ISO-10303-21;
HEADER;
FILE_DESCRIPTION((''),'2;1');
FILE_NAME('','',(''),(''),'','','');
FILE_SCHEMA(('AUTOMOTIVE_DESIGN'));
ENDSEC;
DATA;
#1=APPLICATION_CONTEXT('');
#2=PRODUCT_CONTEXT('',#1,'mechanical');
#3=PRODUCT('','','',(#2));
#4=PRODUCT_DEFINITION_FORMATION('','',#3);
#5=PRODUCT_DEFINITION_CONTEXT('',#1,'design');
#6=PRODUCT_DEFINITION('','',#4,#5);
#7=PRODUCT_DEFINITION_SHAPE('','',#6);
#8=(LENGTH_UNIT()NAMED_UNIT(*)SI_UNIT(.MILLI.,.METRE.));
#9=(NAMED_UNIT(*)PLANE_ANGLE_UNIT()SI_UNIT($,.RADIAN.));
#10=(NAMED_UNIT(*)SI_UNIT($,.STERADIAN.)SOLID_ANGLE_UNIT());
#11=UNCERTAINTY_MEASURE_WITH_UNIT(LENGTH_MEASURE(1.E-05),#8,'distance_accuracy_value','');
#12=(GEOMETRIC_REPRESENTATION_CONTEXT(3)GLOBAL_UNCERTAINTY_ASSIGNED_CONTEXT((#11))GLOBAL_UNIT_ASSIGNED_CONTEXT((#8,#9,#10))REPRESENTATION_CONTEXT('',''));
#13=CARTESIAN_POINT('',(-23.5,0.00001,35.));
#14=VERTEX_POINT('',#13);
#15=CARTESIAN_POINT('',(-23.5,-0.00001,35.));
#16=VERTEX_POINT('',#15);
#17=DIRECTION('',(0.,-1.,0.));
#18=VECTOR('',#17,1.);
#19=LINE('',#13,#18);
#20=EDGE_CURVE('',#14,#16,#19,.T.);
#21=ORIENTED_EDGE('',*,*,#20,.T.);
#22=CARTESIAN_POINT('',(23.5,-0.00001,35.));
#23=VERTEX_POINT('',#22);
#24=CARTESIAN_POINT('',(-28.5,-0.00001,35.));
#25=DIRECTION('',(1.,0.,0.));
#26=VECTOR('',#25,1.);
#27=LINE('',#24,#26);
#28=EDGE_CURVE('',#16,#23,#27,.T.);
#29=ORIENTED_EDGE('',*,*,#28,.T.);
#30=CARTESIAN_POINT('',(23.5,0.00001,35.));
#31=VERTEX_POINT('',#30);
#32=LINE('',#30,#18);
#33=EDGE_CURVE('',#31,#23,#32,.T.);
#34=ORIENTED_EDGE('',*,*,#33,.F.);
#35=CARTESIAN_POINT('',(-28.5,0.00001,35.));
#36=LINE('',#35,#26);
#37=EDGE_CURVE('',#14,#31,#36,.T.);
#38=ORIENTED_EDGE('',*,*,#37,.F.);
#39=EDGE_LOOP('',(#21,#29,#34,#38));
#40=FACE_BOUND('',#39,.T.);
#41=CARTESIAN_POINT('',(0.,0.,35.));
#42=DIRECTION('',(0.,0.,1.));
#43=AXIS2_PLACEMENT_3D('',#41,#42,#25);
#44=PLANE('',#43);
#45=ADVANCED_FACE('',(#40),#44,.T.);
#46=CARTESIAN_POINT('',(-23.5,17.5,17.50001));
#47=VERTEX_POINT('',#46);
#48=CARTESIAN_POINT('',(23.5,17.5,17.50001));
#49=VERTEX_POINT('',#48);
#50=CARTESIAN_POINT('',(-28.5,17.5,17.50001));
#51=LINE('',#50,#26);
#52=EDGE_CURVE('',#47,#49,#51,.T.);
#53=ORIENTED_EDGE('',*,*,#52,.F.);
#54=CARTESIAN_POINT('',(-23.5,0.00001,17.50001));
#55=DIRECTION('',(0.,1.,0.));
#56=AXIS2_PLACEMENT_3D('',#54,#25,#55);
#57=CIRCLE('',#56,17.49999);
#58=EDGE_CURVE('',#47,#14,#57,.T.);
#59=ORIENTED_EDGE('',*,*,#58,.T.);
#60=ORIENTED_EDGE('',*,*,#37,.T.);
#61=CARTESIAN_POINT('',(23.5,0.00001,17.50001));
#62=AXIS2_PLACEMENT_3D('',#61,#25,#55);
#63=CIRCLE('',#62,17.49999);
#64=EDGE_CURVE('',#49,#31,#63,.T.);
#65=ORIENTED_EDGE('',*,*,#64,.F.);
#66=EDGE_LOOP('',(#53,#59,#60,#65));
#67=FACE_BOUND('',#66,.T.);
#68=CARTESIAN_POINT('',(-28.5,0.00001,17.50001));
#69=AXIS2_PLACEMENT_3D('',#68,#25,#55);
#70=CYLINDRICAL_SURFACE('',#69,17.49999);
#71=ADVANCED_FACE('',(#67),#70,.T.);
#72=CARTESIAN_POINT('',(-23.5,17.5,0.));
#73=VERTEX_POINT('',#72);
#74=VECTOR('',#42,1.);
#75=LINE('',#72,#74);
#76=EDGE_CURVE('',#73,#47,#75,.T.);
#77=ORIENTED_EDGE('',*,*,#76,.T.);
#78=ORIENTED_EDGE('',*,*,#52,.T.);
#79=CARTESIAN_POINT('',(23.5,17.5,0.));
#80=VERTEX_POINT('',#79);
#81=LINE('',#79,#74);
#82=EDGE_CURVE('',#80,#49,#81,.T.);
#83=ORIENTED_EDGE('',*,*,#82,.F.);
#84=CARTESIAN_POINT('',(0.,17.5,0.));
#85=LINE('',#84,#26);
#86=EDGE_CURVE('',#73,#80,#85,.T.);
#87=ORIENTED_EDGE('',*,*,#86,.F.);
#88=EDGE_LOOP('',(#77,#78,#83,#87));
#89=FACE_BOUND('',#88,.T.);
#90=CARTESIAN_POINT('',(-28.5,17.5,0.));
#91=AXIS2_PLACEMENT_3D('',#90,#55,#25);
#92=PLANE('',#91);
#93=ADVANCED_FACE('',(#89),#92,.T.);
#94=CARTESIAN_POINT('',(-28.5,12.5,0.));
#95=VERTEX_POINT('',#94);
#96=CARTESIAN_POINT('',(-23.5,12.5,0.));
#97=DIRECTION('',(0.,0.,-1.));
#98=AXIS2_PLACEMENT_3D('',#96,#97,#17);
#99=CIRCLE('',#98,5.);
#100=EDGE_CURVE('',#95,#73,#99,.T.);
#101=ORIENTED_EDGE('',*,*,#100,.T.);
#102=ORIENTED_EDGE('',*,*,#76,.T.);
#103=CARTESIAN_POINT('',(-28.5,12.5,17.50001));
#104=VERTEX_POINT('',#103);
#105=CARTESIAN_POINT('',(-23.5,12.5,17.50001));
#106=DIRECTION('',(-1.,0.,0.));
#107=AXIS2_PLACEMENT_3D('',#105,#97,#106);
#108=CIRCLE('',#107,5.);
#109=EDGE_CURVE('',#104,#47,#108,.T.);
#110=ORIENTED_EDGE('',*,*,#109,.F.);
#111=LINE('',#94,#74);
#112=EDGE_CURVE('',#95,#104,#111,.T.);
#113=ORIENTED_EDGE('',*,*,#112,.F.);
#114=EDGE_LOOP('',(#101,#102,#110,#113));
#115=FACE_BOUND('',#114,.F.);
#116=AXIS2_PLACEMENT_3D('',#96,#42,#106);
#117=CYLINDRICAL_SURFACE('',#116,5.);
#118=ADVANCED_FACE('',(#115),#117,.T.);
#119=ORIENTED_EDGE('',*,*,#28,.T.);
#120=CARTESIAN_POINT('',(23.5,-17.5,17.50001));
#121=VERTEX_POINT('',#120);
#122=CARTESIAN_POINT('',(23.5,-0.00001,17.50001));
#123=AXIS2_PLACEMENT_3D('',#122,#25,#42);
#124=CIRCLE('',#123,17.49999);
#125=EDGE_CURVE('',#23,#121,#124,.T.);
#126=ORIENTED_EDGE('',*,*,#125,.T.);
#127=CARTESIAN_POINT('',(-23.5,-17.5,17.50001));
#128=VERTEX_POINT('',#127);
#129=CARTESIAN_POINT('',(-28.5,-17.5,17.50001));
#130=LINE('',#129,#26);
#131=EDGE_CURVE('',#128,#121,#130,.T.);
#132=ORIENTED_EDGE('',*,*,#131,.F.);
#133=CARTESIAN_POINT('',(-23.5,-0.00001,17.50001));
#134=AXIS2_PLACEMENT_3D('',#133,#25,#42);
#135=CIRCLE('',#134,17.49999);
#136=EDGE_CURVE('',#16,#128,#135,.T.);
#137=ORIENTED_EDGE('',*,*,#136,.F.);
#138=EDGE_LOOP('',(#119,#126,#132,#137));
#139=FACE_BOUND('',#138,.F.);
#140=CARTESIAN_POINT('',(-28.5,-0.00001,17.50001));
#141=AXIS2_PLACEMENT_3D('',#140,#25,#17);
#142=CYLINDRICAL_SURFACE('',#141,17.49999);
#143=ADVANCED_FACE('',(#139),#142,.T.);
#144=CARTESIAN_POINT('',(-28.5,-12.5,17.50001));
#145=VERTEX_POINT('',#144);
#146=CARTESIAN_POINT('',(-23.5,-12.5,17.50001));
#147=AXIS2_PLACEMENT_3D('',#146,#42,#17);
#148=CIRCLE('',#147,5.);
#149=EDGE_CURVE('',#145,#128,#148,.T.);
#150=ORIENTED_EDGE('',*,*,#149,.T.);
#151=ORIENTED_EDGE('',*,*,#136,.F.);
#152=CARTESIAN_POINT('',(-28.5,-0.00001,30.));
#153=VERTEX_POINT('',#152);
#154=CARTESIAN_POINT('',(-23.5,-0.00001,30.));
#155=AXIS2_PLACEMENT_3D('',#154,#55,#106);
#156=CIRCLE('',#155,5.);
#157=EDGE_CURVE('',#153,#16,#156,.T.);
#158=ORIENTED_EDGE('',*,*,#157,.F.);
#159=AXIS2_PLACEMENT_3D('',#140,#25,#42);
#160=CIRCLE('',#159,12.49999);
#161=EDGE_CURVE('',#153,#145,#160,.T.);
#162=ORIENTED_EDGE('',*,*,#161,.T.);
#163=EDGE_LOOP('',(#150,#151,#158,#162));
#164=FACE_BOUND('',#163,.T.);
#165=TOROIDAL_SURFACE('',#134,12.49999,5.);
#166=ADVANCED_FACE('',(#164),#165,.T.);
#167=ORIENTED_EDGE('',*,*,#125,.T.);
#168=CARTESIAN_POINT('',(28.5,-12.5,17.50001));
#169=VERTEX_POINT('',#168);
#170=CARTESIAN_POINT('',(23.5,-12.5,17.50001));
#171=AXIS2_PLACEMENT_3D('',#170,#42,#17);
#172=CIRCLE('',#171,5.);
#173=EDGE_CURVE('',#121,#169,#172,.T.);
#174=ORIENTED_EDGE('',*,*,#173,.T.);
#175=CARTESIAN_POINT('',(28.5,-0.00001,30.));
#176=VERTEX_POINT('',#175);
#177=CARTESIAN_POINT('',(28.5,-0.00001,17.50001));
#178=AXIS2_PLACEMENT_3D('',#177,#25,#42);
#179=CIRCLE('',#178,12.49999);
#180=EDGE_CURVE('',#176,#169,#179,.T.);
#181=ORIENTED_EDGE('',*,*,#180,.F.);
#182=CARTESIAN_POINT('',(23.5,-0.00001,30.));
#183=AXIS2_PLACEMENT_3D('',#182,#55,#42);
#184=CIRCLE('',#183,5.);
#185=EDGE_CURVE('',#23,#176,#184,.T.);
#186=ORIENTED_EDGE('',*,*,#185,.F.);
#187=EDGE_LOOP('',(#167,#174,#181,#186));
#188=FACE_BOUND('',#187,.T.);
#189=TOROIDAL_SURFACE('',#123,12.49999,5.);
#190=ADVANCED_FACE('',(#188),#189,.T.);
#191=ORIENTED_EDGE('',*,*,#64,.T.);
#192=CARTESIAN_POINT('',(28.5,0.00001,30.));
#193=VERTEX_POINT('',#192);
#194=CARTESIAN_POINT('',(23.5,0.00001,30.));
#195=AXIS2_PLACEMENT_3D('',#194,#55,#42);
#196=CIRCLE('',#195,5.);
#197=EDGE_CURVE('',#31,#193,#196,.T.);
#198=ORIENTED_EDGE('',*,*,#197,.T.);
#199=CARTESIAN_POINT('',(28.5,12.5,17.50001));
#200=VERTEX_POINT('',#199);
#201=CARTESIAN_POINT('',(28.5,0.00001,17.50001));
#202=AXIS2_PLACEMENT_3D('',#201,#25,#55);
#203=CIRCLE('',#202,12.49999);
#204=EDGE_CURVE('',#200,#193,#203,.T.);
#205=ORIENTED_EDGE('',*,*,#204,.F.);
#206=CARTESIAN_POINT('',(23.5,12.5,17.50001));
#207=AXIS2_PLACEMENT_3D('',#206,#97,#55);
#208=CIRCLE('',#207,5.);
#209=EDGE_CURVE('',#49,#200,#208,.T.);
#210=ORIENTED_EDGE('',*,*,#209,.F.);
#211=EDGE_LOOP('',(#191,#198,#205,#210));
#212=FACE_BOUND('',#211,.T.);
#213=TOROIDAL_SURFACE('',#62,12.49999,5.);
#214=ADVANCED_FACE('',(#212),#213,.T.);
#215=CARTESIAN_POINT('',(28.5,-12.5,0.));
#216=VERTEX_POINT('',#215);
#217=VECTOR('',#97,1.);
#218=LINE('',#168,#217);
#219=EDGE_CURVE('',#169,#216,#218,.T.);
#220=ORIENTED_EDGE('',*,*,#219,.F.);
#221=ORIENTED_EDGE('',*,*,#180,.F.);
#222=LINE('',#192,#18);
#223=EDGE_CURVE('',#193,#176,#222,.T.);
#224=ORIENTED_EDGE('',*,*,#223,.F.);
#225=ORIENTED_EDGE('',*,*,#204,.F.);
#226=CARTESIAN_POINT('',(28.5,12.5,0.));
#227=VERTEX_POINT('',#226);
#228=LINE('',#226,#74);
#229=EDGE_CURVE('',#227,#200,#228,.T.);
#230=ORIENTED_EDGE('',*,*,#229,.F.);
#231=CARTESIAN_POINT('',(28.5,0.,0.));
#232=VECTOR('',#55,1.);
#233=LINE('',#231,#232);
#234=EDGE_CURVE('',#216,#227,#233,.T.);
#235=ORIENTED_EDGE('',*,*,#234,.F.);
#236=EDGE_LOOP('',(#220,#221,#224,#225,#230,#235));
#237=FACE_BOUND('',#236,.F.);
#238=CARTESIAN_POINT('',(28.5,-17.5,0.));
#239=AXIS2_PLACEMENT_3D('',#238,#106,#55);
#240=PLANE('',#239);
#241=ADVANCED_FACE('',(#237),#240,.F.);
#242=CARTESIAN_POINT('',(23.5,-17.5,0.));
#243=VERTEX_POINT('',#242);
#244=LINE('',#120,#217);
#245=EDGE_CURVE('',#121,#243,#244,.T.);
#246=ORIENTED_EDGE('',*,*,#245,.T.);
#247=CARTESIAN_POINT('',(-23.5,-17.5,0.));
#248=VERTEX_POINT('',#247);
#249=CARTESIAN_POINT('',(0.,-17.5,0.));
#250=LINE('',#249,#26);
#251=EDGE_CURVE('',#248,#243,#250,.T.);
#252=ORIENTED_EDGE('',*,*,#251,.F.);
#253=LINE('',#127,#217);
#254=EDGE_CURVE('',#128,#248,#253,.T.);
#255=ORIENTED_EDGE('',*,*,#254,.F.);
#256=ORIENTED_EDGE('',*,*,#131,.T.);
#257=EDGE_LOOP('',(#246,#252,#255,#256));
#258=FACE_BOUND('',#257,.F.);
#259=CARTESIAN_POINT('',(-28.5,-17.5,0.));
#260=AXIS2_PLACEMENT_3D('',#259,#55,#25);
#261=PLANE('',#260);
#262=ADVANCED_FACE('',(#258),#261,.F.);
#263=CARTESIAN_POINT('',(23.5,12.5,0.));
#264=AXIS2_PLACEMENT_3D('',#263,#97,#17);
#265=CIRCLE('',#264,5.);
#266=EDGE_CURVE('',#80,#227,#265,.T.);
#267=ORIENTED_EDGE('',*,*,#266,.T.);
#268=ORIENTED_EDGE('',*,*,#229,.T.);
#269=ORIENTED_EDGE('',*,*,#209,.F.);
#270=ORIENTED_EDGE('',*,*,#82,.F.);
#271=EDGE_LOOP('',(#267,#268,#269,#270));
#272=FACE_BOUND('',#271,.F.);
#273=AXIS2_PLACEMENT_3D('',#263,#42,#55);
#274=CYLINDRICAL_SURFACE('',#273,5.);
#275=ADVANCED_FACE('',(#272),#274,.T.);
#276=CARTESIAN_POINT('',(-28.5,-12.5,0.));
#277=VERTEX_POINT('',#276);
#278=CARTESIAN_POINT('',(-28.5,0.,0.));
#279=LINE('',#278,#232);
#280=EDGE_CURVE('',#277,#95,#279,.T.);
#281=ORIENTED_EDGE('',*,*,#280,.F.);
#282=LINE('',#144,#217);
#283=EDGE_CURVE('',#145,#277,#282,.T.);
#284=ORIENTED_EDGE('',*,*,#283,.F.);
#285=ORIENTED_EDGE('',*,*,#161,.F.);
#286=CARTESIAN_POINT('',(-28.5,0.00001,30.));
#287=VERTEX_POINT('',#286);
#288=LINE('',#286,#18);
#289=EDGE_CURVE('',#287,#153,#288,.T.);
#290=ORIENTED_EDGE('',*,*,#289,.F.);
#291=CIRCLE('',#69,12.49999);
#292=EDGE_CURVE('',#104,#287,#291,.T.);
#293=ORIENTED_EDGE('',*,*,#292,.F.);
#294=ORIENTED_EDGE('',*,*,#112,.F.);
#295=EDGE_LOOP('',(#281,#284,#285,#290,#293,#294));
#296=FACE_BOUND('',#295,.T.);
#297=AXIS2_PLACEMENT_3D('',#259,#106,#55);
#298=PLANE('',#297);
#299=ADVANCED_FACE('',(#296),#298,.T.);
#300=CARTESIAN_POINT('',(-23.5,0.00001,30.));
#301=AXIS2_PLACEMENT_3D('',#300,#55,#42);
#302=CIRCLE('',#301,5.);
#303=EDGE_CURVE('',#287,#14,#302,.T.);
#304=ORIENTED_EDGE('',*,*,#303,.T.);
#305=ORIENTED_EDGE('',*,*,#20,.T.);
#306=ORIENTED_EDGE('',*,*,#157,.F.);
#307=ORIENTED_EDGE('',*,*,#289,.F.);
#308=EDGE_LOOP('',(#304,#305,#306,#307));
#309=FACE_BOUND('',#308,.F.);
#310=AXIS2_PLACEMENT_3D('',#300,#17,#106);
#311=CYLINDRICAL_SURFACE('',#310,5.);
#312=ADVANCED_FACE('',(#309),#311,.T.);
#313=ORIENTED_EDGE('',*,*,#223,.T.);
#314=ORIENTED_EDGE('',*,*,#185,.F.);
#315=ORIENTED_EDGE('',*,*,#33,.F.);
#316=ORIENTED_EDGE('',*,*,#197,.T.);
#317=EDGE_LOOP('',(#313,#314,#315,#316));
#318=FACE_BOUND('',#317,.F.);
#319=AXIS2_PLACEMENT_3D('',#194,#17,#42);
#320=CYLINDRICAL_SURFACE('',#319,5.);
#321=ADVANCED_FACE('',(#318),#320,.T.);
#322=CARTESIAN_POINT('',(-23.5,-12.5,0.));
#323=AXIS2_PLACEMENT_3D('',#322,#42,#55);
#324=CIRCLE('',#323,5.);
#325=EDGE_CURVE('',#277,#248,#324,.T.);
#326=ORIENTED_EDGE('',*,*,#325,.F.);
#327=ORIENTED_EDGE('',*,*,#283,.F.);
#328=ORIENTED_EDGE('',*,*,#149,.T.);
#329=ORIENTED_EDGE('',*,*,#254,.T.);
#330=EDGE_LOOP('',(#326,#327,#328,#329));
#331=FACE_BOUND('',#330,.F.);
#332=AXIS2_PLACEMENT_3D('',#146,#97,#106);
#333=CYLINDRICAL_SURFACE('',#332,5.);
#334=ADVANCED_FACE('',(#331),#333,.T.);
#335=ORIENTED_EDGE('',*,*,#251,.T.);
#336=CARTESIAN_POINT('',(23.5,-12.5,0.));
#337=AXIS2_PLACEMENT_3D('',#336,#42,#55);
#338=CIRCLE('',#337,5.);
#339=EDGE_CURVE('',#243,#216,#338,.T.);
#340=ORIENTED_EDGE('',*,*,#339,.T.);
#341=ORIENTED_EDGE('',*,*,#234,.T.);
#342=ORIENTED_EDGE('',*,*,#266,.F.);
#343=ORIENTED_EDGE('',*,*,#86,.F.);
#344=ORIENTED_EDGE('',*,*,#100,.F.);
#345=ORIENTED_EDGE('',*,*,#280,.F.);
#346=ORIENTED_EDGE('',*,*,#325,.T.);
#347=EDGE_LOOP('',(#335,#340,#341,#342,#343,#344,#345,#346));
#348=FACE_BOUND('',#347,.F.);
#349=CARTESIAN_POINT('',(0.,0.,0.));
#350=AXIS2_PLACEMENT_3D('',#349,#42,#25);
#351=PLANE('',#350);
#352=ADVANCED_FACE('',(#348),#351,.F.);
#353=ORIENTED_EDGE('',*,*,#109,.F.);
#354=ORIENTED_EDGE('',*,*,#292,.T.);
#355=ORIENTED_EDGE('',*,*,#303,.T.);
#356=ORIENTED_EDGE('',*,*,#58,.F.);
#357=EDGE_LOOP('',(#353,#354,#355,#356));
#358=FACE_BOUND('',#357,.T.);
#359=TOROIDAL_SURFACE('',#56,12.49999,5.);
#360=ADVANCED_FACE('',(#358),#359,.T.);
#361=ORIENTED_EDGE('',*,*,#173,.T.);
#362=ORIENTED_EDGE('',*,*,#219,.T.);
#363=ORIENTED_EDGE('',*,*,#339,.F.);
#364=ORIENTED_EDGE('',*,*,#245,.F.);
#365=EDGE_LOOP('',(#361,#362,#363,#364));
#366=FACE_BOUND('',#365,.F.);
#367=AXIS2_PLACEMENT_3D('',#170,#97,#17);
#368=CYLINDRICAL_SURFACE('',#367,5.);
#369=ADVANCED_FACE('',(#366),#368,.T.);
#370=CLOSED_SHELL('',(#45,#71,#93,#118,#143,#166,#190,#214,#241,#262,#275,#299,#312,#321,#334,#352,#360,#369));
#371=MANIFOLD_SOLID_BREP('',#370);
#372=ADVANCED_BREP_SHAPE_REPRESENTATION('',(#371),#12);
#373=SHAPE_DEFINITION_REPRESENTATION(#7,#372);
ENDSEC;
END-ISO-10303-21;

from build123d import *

# Parameters (mm, degrees)
F0_W     = 57
F0_H     = 35
F1_DEPTH = 35
F2_R     = 17.49999
F3_R     = 5


# Not quite as in the source:
# - a fillet or chamfer is up to 0.001 mm smaller than in the source, because OpenCascade refuses the exact size


with BuildPart() as f1:
    # F0 (on Top) → F1 (new body)
    with BuildSketch(Plane.XY):
        Rectangle(F0_W, F0_H)
    extrude(amount=F1_DEPTH)

    # F2 (radius 17.5 in the source; OpenCascade refuses exactly that, so slightly less here)
    f2_edges = [f1.edges().sort_by_distance(p)[0] for p in [
        (0, -17.5, 35),
        (0, 17.5, 35),
    ]]
    fillet(f2_edges, radius=F2_R)

    # F3
    f3_edges = [f1.edges().sort_by_distance(p)[0] for p in [
        (28.5, 17.5, 8.750005),
        (28.5, 12.374372, 29.874372),
        (28.5, -17.5, 8.750005),
        (-28.5, 12.374372, 29.874372),
        (-28.5, -17.5, 8.750005),
        (-28.5, 17.5, 8.750005),
    ]]
    fillet(f3_edges, radius=F3_R)


solid = f1.part
